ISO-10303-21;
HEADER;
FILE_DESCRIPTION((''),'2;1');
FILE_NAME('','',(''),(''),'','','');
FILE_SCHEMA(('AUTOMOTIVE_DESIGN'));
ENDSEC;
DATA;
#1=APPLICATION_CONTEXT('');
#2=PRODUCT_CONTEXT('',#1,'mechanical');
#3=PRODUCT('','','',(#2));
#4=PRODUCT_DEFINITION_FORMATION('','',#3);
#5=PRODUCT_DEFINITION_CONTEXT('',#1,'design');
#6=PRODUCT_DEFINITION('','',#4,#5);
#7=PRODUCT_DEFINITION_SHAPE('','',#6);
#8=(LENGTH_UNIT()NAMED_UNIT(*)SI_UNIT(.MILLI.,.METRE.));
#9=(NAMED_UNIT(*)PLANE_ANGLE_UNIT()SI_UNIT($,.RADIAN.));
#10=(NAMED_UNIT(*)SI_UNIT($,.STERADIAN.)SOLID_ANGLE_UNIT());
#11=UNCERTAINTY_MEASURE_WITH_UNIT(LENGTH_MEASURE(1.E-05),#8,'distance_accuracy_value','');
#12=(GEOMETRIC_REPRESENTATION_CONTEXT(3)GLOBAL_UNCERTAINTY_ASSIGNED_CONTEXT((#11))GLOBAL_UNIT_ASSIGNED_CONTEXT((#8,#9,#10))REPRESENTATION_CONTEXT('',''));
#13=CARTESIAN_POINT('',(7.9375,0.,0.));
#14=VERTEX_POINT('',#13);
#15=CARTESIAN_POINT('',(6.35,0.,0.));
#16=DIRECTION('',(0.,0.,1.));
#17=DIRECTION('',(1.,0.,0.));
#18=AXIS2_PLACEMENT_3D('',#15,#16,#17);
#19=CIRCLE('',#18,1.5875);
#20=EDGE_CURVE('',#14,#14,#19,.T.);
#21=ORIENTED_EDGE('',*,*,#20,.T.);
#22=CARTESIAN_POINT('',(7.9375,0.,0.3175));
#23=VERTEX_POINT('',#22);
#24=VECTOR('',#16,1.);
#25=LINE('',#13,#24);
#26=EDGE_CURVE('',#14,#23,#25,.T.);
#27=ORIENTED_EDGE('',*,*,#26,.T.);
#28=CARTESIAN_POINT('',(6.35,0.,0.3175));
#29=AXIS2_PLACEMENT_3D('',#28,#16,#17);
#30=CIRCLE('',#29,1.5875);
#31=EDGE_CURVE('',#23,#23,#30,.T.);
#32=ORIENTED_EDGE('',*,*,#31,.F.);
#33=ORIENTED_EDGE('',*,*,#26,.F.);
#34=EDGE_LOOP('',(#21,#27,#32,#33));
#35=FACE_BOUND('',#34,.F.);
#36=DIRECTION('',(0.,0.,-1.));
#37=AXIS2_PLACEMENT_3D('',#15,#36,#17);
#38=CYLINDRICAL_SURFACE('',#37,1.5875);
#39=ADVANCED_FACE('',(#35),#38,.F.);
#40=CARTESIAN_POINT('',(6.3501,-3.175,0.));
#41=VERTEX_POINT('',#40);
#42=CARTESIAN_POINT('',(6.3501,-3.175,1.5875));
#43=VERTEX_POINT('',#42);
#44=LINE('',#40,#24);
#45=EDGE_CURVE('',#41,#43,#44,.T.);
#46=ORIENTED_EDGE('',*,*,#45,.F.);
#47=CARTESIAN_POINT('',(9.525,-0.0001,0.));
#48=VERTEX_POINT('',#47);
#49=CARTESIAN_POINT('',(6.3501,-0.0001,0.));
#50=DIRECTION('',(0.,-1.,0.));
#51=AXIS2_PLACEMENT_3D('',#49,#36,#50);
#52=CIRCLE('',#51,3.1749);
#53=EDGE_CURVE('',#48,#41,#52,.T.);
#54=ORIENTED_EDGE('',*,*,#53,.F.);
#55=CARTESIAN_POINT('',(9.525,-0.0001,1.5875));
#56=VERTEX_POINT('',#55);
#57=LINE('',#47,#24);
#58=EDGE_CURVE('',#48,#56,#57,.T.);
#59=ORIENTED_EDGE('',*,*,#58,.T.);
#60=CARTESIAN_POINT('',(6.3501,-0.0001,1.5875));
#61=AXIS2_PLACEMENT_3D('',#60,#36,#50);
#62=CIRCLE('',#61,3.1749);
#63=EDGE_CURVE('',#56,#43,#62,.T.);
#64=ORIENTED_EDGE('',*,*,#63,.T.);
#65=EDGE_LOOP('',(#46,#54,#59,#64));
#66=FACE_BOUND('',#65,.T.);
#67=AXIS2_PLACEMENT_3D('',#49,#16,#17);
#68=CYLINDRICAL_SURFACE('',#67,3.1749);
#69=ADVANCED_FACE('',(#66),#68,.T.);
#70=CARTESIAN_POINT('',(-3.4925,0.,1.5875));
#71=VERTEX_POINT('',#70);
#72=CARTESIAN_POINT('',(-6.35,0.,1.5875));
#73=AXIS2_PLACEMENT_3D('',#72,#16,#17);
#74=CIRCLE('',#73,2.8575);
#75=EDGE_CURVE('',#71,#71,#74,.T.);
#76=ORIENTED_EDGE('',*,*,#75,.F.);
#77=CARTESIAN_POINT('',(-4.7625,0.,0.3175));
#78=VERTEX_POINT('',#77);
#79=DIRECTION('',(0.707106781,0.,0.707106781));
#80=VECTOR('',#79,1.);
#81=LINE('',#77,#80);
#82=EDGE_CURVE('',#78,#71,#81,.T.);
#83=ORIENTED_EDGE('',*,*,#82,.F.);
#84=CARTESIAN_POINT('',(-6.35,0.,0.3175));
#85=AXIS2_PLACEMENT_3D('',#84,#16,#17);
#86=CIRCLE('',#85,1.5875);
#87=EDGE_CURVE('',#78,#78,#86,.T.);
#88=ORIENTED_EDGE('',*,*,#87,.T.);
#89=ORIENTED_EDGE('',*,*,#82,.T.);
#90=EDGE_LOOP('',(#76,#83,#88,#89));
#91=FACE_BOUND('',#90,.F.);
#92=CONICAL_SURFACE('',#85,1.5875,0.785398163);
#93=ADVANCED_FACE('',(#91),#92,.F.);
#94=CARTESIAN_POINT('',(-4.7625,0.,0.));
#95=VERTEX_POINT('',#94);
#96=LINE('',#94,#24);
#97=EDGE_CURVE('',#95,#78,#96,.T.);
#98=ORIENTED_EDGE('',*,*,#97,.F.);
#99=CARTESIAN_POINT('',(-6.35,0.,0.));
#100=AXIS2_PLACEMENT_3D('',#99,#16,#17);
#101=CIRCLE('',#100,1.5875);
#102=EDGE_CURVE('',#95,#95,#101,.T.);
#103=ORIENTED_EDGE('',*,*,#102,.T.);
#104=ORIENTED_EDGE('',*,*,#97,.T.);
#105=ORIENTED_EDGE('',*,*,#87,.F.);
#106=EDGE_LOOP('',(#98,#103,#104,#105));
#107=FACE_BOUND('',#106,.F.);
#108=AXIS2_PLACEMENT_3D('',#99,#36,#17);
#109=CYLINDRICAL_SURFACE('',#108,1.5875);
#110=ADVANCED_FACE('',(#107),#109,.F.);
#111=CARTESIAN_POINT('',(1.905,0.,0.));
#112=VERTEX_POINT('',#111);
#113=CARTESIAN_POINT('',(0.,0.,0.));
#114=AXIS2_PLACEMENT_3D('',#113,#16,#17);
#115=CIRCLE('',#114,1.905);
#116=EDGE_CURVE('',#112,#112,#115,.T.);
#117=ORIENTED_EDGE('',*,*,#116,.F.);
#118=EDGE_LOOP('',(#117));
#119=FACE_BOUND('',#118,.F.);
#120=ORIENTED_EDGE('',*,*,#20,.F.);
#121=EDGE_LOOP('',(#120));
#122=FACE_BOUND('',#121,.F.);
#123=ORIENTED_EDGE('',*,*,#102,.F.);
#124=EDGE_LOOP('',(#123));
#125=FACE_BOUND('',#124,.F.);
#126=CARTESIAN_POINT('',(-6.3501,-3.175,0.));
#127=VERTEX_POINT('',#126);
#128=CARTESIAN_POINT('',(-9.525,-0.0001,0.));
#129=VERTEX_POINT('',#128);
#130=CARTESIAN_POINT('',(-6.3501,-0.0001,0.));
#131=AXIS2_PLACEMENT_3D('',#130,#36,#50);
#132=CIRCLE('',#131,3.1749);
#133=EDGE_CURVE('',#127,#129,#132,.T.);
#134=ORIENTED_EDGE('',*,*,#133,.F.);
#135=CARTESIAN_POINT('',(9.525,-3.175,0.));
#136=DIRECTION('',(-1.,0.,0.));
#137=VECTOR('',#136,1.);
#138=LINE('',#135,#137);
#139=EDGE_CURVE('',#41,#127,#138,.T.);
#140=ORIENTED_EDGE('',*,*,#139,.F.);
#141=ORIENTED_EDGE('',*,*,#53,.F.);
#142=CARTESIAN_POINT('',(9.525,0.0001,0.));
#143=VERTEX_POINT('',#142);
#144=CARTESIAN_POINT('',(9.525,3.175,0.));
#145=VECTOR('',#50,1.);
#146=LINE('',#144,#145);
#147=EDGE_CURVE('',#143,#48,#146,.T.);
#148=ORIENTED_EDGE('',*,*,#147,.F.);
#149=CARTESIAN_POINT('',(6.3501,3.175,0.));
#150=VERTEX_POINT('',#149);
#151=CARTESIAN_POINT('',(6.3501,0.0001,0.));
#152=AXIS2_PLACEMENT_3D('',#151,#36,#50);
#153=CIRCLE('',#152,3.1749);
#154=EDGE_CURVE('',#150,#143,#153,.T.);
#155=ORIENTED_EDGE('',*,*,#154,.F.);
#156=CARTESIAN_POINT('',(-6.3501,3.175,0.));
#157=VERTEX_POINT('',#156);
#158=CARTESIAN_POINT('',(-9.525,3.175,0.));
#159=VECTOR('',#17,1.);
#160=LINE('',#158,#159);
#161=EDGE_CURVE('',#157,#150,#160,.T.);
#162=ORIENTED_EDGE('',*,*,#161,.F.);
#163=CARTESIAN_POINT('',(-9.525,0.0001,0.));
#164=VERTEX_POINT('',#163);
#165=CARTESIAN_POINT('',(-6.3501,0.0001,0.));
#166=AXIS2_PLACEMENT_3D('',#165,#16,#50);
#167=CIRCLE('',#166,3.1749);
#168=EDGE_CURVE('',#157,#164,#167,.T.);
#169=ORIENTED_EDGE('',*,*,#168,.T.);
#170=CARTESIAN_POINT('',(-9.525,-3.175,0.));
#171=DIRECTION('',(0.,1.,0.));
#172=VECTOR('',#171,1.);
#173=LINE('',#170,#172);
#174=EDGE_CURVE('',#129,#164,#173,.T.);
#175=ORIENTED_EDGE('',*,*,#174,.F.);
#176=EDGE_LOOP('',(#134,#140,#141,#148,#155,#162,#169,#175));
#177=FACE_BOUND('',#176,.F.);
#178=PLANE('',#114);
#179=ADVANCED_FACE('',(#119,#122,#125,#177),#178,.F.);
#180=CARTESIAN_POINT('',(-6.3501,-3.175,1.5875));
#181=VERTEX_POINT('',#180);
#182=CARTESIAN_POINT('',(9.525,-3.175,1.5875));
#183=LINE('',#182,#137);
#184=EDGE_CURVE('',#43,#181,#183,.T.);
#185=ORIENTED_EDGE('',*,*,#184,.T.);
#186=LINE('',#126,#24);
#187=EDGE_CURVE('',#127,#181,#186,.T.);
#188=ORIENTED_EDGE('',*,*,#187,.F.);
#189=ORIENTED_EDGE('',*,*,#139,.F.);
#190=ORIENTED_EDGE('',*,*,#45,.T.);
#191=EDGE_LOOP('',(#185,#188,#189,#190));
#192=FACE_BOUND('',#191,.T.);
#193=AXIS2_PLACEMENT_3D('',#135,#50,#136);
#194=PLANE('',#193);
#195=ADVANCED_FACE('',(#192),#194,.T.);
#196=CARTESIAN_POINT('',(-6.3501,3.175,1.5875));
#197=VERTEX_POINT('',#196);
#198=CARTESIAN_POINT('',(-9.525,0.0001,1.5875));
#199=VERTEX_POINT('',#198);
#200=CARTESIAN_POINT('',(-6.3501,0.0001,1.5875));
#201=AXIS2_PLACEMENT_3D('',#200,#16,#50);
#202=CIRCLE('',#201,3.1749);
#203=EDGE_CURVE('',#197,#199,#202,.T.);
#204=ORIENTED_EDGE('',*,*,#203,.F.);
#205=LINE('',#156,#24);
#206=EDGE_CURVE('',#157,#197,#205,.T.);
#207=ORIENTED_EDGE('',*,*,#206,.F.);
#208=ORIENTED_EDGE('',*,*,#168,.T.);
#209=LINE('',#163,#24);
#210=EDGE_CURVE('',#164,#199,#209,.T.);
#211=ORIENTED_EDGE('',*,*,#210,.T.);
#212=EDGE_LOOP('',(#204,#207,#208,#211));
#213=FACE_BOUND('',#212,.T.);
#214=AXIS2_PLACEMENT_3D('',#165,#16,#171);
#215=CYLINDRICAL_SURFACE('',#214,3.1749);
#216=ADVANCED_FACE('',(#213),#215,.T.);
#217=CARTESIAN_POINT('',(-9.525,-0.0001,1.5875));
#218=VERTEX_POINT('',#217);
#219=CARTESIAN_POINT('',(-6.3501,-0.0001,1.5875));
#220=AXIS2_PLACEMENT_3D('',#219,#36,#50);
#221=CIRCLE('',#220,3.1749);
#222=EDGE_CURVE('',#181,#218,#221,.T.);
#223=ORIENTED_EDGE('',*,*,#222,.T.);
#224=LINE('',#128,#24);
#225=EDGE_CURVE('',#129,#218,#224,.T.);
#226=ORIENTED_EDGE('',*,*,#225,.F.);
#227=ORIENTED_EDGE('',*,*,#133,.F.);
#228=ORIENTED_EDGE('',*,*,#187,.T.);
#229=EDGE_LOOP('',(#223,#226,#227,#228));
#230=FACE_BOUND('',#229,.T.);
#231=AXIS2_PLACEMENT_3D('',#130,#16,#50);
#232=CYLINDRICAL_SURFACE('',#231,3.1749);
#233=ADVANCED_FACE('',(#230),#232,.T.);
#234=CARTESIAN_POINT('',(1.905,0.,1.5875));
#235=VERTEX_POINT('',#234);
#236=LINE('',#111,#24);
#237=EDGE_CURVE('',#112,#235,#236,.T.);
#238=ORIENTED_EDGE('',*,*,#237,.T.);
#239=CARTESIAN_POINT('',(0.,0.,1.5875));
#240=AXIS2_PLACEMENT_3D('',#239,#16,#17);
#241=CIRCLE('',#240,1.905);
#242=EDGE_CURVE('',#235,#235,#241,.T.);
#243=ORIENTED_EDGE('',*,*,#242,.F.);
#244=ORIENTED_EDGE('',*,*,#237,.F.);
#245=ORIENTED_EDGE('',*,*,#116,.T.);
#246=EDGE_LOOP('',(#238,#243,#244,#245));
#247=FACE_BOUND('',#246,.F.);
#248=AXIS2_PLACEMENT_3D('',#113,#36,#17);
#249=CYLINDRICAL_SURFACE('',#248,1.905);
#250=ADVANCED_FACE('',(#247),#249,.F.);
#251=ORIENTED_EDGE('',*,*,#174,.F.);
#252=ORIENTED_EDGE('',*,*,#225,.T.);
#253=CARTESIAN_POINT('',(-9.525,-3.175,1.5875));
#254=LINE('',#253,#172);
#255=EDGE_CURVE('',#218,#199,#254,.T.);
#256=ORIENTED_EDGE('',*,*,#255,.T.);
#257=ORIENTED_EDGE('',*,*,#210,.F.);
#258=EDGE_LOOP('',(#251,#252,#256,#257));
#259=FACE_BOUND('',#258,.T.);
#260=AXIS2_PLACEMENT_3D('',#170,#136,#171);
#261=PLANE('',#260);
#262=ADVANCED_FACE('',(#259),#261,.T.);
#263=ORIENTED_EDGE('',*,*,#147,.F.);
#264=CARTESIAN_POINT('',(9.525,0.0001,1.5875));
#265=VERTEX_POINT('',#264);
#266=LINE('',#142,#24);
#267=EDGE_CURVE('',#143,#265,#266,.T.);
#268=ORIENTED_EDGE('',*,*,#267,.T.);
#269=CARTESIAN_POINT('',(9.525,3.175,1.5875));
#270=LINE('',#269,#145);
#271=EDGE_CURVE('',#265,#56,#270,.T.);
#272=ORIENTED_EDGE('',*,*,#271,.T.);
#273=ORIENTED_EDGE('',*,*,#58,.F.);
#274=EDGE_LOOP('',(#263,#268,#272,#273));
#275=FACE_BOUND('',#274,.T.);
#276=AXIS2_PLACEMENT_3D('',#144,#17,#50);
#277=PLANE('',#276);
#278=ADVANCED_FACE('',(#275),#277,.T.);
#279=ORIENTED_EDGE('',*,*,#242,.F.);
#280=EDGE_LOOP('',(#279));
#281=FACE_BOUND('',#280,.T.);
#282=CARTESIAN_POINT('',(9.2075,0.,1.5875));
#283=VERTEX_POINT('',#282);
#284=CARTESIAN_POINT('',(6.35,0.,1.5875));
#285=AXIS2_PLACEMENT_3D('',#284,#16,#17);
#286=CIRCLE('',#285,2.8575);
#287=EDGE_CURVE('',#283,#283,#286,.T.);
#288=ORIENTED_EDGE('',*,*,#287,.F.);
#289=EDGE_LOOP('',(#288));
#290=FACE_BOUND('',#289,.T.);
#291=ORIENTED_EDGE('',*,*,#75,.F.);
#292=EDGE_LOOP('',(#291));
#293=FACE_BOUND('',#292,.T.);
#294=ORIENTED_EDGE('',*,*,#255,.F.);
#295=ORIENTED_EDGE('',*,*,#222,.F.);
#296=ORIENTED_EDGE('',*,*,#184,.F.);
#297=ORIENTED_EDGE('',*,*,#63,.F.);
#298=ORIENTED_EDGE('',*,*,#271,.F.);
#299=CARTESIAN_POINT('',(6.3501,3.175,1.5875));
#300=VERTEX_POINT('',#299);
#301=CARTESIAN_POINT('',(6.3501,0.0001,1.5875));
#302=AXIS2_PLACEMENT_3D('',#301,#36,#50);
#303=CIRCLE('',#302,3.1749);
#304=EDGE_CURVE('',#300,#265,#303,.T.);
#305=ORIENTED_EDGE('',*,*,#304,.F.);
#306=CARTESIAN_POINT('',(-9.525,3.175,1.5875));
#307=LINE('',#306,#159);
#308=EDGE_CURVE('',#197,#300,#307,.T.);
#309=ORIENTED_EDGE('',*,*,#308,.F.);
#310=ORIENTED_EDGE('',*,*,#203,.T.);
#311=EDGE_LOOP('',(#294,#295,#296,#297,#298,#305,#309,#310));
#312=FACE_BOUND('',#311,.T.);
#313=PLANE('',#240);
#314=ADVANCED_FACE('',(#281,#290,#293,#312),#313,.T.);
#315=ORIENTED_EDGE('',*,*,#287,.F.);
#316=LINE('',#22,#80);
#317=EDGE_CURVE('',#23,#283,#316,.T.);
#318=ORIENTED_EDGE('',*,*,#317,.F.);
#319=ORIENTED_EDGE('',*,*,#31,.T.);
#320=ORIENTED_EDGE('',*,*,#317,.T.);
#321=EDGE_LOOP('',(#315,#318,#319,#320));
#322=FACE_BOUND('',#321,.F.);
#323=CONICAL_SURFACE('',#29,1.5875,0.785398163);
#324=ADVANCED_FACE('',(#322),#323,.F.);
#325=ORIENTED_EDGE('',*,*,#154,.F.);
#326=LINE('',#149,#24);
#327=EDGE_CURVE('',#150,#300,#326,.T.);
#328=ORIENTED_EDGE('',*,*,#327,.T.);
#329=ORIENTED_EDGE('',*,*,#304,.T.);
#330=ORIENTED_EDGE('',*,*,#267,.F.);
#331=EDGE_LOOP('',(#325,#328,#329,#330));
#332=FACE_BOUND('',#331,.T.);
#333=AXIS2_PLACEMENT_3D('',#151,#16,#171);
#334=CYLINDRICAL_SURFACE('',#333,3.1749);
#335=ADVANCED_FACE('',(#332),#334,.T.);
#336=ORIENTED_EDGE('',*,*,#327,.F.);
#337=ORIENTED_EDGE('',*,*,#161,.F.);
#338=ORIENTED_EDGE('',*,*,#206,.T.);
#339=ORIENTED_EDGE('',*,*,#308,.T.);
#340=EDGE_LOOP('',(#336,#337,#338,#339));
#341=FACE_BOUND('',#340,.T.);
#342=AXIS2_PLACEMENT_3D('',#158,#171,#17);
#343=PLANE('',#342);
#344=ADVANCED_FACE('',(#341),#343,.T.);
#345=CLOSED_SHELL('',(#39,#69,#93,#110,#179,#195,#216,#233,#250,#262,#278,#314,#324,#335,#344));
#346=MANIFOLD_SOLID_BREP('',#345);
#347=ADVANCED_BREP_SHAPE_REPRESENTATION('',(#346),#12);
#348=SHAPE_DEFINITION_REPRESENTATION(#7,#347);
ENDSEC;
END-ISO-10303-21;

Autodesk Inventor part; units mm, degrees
ref_plane "YZ Plane" through (0, 0, 0) normal (1, 0, 0) x (0, 1, 0)
ref_plane "XZ Plane" through (0, 0, 0) normal (0, 1, 0) x (-1, 0, 0)
ref_plane "XY Plane" through (0, 0, 0) normal (0, 0, 1) x (1, 0, 0)
sketch "Sketch1" plane through (0, 0, 0) normal (0, 0, 1) x (1, 0, 0)
  circle A0 centre (0, 0) radius 1.905
  line L0 (0, 0) -> (6.35, 0)
  line L1 (6.35, 0) -> (-6.35, 0)
  circle A1 centre (-6.35, 0) radius 1.5875
  circle A2 centre (6.35, 0) radius 1.5875
  line L2 (-9.525, 3.175) -> (9.525, 3.175)
  line L3 (9.525, 3.175) -> (9.525, -3.175)
  line L4 (9.525, -3.175) -> (-9.525, -3.175)
  line L5 (-9.525, -3.175) -> (-9.525, 3.175)
  dimension "d0" = 3.81
  dimension "d1" = 6.35
  dimension "d2" = 12.7
  dimension "d3" = 3.175
  dimension "d4" = 3.175
  dimension "d5" = 19.05
  dimension "d6" = 9.525
  dimension "d7" = 6.35
  dimension "d8" = 3.175
sketch "Sketch1 outline for Extrusion1" plane through (0, 0, 0) normal (0, 0, 1) x (1, 0, 0)
  line L0 (-9.525, 3.175) -> (9.525, 3.175)
  line L1 (-9.525, -3.175) -> (-9.525, 3.175)
  line L2 (9.525, 3.175) -> (9.525, -3.175)
  line L3 (9.525, -3.175) -> (-9.525, -3.175)
  circle A0 centre (-6.35, 0) radius 1.5875
  circle A1 centre (0, 0) radius 1.905
  circle A2 centre (6.35, 0) radius 1.5875
extrude "Extrusion1" add sketch "Sketch1 outline for Extrusion1" along normal blind 1.5875
chamfer "Chamfer1" distance 1.27 angle 45 2 edges at (-7.9375, 0, 1.5875) (4.7625, 0, 1.5875)
fillet "Fillet1" radius 3.175 4 edges at (-9.525, 3.175, 0.7937) (-9.525, -3.175, 0.7937) (9.525, -3.175, 0.7937) (9.525, 3.175, 0.7937)
properties part number "pushSwitchBushingHolderRear" material "ABS Plastic"
